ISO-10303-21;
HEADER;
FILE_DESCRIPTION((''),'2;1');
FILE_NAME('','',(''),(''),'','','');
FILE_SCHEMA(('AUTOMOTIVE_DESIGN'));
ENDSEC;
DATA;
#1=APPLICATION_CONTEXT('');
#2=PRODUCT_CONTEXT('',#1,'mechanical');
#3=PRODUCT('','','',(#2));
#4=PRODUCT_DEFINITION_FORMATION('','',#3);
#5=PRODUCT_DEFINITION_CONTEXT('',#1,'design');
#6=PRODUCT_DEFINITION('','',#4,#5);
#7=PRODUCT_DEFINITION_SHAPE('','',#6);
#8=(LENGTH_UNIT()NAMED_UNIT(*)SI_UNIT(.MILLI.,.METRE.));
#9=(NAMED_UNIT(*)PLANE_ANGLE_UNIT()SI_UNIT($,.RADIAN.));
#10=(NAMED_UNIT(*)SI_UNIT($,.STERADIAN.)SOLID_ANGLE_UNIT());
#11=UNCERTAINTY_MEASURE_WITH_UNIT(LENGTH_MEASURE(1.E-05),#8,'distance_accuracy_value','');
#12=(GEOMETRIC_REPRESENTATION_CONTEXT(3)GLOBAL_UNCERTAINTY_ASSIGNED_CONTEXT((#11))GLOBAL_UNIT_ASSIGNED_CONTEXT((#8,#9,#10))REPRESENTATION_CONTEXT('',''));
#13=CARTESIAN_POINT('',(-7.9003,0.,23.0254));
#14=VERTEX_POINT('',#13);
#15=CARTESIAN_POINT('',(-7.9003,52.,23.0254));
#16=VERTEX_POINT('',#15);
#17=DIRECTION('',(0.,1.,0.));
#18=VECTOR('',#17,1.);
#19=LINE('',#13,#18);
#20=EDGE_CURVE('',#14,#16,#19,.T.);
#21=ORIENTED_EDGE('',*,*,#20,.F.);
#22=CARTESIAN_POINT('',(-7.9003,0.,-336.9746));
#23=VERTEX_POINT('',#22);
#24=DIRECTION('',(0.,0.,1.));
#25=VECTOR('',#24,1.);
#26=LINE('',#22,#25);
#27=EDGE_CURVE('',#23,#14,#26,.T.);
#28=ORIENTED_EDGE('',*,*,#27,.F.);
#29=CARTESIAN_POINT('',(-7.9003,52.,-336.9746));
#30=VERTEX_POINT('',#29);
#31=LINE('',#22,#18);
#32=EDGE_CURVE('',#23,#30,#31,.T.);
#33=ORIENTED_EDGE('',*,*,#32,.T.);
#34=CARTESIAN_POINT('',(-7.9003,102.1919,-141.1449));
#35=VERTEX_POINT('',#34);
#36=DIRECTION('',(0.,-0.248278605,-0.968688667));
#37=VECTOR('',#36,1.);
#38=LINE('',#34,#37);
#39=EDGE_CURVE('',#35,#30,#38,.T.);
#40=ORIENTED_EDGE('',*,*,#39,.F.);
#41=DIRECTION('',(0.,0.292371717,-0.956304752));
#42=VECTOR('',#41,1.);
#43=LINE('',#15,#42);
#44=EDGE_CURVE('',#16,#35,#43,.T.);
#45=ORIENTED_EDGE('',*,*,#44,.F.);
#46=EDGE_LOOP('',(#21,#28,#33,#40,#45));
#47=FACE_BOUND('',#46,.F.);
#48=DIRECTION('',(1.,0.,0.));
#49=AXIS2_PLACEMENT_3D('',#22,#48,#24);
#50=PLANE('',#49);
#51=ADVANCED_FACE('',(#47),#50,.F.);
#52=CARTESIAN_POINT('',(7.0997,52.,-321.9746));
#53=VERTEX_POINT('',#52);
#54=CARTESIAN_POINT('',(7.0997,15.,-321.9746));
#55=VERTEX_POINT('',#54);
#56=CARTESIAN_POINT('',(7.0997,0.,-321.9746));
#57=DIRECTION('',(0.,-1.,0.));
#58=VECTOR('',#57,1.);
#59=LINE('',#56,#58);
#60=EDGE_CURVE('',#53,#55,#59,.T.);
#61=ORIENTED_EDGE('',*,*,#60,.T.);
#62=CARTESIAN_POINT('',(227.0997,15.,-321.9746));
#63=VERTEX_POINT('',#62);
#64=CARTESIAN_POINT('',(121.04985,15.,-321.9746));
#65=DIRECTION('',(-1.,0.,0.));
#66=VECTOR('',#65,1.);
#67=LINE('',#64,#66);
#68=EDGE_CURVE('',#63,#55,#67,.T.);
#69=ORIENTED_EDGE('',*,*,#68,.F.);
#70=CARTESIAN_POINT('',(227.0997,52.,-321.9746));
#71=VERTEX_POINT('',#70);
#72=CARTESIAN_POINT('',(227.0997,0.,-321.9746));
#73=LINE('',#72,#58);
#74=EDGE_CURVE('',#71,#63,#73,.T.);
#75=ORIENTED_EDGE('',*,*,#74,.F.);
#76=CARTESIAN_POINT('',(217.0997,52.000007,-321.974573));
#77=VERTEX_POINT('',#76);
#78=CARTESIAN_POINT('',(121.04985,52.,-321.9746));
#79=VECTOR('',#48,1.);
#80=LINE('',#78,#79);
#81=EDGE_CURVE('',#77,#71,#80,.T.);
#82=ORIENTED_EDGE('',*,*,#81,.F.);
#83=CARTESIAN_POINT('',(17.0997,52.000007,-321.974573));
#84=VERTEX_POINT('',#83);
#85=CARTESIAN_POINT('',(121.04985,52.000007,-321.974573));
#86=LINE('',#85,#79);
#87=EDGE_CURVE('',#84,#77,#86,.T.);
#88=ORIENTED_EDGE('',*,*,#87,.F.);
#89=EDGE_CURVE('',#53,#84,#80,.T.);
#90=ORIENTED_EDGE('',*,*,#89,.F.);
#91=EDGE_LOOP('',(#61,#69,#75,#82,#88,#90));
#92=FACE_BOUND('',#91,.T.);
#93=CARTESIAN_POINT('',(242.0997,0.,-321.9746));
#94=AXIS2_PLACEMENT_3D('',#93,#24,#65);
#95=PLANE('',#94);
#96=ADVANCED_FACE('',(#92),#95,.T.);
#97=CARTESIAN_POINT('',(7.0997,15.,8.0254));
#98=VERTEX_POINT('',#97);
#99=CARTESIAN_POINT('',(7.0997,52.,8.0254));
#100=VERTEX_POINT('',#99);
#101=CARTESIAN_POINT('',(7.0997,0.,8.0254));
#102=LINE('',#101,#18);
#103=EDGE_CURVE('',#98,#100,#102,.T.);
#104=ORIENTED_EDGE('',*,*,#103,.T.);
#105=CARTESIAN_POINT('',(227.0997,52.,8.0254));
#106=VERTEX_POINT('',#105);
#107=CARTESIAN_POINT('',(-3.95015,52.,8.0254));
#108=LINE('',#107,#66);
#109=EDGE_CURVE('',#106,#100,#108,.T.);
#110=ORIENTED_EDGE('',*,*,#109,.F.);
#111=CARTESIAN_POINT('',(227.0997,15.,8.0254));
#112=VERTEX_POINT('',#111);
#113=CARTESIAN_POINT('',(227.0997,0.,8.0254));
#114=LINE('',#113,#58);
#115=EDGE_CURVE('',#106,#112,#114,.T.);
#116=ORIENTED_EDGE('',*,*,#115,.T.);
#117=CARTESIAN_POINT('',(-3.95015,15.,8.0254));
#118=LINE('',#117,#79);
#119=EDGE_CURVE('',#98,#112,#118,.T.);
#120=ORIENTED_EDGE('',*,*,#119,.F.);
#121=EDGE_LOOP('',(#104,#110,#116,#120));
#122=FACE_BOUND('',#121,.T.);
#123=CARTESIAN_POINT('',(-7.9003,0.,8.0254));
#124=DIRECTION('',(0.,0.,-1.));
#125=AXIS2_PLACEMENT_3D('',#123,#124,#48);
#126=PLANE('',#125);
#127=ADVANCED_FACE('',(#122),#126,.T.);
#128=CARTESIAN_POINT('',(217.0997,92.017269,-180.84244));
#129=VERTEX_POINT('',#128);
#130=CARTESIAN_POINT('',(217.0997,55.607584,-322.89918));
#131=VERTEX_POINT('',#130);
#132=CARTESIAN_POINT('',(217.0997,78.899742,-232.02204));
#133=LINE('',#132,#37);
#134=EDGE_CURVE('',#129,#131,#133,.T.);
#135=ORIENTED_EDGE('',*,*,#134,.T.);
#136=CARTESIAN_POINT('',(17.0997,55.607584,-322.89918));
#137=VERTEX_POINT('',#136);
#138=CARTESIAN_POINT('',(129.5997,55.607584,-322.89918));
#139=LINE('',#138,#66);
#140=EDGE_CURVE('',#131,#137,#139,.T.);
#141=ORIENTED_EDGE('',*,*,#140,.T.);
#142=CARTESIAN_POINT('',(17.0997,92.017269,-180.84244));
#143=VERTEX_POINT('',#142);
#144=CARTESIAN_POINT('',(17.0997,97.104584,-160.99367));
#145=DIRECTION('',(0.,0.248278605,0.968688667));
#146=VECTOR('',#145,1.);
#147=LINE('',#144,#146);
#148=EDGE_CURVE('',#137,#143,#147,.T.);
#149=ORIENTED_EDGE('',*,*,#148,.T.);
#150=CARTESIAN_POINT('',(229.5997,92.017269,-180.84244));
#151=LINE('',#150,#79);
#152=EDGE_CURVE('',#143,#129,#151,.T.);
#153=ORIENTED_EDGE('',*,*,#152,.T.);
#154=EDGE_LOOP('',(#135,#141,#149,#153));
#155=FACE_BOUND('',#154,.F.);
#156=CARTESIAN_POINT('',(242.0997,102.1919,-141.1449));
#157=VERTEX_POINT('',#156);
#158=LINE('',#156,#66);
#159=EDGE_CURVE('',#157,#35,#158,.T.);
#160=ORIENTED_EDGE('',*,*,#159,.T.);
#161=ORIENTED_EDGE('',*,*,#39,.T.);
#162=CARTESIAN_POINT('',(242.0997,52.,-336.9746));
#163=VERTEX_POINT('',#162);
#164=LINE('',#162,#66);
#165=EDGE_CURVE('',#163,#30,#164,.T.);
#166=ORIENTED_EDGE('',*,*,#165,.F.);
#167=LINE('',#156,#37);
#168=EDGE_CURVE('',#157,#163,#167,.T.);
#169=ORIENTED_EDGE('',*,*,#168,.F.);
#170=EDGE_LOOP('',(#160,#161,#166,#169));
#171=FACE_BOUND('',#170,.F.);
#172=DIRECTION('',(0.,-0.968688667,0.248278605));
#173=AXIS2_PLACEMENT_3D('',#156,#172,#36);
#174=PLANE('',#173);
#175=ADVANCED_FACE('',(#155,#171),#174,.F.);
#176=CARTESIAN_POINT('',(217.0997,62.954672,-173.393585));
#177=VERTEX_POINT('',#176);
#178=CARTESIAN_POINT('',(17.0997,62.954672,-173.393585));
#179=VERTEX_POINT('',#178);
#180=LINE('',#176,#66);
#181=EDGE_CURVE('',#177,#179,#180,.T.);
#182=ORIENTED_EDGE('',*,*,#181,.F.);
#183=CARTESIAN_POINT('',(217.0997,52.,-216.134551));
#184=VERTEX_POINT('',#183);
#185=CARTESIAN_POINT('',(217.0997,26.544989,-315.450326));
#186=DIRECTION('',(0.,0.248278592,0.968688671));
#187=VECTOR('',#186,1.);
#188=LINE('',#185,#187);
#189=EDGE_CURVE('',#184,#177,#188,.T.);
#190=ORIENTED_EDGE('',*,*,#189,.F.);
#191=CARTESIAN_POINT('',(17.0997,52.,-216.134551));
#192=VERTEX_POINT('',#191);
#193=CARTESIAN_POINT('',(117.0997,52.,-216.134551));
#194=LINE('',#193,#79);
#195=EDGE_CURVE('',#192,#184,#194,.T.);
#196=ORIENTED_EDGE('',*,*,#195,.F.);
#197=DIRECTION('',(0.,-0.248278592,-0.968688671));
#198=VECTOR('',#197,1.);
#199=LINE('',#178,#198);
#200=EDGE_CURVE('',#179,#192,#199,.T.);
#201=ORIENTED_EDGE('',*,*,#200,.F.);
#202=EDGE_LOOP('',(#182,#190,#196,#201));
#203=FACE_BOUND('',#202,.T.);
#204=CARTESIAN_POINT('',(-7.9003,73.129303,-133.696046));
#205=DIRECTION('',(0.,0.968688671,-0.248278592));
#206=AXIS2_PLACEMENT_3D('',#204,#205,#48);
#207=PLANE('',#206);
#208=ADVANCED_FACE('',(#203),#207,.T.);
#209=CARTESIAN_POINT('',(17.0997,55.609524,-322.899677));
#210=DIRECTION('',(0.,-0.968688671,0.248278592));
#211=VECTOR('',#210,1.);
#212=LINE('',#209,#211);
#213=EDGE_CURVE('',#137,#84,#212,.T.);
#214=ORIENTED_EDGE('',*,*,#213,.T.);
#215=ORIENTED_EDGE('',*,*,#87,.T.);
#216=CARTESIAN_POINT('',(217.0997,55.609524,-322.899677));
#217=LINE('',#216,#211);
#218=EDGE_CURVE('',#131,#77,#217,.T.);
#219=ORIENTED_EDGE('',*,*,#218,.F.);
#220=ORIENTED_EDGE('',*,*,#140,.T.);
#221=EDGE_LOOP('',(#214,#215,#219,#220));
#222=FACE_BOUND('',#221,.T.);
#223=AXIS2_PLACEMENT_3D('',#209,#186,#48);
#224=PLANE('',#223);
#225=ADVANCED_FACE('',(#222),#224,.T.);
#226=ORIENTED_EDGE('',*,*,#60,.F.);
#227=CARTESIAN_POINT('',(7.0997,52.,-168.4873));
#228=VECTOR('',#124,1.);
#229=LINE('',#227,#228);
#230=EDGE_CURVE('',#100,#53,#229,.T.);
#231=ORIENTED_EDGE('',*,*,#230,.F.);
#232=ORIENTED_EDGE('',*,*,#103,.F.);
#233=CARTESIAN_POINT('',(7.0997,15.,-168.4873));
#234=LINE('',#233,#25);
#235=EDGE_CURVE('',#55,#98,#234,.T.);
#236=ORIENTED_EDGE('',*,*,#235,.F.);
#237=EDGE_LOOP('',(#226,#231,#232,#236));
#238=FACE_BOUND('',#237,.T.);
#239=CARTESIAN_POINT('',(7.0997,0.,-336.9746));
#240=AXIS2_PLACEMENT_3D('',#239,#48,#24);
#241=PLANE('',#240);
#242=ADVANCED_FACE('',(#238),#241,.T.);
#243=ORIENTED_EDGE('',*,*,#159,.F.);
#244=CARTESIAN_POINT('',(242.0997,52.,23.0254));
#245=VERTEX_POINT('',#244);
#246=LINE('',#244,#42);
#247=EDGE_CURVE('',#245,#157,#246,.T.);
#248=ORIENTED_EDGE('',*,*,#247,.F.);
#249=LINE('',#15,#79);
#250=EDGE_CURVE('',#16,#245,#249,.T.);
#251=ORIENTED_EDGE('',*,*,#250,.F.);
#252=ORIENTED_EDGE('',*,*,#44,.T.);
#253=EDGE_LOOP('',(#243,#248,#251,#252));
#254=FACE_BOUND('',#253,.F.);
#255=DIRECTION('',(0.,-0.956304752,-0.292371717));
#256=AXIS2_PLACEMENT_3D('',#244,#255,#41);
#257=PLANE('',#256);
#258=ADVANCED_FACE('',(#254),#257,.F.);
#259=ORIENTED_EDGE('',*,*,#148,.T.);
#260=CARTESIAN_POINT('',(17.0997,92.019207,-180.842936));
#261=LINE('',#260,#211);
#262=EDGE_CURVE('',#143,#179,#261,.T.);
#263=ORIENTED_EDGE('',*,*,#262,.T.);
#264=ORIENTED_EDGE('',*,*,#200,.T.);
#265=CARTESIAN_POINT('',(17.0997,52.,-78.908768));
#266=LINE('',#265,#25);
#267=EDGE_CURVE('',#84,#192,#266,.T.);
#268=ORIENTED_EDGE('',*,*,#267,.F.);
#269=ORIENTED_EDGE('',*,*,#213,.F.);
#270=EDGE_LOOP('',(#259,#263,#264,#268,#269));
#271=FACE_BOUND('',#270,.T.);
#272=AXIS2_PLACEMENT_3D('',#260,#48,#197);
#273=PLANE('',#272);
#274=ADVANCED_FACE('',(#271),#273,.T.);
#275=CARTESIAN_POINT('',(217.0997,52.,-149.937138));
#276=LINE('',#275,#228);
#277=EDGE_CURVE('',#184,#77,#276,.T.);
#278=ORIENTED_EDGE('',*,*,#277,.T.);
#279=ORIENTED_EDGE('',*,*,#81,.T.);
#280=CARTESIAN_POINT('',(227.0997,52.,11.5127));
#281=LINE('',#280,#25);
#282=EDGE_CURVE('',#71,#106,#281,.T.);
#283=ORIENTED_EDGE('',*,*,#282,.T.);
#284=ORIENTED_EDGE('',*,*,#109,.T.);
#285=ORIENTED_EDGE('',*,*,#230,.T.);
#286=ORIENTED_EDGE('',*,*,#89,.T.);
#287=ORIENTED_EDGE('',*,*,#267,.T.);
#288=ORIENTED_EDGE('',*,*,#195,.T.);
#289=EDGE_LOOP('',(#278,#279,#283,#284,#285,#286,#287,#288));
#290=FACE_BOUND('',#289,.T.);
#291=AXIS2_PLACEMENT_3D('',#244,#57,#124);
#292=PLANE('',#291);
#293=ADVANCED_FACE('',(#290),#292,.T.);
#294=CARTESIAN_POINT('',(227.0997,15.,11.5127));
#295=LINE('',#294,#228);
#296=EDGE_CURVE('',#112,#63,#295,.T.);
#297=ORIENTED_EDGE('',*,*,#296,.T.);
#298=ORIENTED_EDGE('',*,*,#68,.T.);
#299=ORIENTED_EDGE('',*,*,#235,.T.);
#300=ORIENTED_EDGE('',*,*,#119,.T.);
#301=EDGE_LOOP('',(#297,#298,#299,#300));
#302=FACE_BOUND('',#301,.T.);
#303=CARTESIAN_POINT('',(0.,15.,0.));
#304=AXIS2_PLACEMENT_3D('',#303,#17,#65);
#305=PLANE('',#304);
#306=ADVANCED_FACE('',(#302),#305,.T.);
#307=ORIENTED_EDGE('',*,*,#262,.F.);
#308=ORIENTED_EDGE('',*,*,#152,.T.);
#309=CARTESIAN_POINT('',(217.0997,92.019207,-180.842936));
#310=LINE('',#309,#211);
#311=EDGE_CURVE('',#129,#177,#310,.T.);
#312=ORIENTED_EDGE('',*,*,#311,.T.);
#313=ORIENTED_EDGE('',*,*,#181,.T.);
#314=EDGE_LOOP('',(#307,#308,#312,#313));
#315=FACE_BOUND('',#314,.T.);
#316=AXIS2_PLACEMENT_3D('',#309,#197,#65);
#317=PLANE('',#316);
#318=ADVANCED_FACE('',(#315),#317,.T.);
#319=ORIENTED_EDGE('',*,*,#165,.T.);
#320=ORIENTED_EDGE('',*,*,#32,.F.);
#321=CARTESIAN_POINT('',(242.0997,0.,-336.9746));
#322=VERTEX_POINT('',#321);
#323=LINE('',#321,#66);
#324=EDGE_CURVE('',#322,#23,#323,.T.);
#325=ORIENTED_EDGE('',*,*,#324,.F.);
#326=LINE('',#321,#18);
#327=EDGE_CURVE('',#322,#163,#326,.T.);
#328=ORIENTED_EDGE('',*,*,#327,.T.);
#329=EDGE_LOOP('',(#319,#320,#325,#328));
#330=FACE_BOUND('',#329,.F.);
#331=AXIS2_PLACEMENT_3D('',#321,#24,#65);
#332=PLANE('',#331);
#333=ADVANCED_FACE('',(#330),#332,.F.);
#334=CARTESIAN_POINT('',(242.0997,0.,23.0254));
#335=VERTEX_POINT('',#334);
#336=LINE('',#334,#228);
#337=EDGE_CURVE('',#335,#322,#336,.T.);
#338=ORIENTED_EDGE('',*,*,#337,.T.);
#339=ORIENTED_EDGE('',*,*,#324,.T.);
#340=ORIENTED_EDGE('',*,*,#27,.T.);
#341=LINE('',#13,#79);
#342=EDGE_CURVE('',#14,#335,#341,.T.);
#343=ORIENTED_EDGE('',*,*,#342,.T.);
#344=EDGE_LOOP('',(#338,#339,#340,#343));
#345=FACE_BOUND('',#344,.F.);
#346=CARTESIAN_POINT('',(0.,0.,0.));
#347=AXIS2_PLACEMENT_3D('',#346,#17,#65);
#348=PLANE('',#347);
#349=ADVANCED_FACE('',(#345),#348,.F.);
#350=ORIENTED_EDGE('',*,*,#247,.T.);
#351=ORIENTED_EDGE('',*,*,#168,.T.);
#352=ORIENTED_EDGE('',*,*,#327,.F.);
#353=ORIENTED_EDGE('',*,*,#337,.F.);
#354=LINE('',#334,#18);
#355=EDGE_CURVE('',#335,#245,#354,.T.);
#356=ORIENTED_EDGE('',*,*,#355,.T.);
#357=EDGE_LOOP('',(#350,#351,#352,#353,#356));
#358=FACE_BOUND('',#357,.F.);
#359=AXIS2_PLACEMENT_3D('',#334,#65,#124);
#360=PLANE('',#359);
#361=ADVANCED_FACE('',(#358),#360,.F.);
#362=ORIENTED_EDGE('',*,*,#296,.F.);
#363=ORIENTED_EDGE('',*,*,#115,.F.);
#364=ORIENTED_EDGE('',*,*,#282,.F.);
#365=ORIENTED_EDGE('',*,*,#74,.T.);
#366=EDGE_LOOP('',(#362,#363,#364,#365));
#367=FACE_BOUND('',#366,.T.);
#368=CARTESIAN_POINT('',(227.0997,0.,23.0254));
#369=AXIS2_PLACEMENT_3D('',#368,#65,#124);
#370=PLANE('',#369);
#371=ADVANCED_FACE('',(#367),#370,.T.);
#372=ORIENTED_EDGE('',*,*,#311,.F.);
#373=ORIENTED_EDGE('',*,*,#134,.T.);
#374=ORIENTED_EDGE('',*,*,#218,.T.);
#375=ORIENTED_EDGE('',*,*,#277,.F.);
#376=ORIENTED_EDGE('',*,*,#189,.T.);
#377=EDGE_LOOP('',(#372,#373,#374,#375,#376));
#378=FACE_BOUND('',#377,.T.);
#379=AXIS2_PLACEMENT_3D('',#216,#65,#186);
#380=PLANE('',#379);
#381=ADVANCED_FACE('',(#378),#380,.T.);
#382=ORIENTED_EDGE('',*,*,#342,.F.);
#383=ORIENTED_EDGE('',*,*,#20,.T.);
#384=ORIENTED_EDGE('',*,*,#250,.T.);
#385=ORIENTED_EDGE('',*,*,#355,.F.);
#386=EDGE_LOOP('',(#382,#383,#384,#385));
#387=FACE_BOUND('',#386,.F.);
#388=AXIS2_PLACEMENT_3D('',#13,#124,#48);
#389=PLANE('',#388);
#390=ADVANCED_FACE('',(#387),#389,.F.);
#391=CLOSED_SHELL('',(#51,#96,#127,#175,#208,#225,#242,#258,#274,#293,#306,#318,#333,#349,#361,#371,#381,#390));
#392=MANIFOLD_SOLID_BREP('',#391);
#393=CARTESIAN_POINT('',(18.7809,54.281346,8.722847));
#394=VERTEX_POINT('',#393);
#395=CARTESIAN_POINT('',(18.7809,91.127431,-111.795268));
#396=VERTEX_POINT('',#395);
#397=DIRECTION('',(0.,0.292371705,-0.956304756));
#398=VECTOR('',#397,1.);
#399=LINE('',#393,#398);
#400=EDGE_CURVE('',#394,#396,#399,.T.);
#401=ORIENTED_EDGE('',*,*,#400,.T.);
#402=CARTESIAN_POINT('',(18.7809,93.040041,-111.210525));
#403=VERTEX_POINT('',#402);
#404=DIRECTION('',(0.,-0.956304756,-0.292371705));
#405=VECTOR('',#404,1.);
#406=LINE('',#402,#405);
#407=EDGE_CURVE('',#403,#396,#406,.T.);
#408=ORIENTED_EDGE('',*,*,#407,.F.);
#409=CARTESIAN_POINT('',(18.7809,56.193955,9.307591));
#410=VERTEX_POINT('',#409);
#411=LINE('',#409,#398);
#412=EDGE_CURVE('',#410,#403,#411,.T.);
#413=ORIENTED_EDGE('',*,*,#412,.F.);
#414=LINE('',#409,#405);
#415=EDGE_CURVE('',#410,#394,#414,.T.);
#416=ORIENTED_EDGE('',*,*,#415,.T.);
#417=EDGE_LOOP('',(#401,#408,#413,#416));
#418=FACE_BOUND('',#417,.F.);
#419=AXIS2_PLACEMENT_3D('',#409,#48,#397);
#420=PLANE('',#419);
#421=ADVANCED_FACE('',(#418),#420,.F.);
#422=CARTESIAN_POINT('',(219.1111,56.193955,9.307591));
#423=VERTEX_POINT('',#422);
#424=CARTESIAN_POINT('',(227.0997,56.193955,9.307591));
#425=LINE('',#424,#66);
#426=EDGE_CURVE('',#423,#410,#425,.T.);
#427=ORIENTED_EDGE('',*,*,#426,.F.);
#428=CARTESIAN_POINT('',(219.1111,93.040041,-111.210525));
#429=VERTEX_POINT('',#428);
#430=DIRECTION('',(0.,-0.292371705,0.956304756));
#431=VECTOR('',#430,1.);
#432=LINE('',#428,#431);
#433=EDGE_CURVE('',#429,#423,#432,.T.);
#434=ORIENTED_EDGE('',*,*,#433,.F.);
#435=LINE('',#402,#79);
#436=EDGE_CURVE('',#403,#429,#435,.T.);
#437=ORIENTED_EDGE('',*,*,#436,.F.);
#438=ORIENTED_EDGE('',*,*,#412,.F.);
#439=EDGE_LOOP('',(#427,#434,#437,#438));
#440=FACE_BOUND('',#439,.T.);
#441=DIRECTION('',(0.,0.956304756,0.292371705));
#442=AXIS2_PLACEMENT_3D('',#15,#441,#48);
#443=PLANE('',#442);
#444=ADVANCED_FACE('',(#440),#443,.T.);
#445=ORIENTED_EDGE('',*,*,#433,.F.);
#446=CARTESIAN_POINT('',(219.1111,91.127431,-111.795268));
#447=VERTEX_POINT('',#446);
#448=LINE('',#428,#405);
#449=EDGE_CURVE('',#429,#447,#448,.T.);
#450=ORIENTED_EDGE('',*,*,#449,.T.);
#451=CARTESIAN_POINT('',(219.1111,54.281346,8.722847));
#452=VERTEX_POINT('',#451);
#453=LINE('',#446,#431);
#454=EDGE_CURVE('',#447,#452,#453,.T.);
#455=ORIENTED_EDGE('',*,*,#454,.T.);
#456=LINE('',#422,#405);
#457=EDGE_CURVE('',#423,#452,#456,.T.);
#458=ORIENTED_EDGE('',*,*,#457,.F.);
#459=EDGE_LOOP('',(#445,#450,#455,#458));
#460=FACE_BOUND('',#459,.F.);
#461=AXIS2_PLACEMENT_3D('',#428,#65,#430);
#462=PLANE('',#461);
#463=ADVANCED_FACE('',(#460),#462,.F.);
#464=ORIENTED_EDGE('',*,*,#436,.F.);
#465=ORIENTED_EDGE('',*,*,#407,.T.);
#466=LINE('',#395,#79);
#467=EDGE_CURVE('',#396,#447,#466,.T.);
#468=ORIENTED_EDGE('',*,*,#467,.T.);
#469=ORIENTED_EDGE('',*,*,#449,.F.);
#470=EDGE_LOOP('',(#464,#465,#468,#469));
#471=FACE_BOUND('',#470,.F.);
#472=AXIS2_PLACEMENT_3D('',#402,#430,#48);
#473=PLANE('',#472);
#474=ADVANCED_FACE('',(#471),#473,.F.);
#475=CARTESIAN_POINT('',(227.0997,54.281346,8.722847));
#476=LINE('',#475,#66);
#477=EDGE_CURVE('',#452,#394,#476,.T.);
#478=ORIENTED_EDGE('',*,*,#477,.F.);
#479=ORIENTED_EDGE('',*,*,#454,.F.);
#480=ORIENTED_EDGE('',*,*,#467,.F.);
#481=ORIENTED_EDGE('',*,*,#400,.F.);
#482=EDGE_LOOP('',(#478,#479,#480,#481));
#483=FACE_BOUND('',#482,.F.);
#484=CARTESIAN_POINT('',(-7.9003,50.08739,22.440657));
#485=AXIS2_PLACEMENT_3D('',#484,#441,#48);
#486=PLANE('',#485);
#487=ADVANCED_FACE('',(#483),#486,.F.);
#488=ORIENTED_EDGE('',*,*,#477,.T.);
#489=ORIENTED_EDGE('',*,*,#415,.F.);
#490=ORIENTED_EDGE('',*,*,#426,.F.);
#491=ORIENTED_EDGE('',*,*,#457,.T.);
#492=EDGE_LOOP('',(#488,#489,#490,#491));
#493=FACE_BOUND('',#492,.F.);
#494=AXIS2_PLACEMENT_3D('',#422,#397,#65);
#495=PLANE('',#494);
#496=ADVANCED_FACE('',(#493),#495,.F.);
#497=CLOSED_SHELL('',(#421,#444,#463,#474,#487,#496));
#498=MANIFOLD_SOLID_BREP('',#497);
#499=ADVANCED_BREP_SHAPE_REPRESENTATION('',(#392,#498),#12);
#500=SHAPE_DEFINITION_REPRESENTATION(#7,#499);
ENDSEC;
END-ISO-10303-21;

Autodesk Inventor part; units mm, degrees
ref_plane "YZ Plane" through (0, 0, 0) normal (1, 0, 0) x (0, 1, 0)
ref_plane "XZ Plane" through (0, 0, 0) normal (0, 1, 0) x (-1, 0, 0)
ref_plane "XY Plane" through (0, 0, 0) normal (0, 0, 1) x (1, 0, 0)
sketch "Sketch1" plane through (0, 0, 0) normal (0, 1, 0) x (-1, 0, 0)
  line L0 (7.9003, 23.0254) -> (-242.0997, 23.0254)
  line L1 (-242.0997, 23.0254) -> (-242.0997, -336.9746)
  line L2 (-242.0997, -336.9746) -> (7.9003, -336.9746)
  line L3 (7.9003, -336.9746) -> (7.9003, 23.0254)
  point P0 (0, 0)
  dimension "d0" = 250
  dimension "d1" = 360
extrude "Extrusion1" add sketch "Sketch1" along normal blind 52
shell "Shell1" thickness 15 removed faces 1 at (158.7664, 52, -96.9746)
sketch3d "3D Sketch5"
sketch "Sketch8" plane through (242.0997, 0, 23.0254) normal (1, 0, 0) x (0, 0, -1)
  line L0 (0, 52) -> (164.1703, 102.1919)
  line L1 (0, 52) -> (171.6715, 52) construction
  line L2 (0, 52) -> (360, 52) projected
  line L3 (164.1703, 102.1919) -> (360, 52)
  line L4 (360, 52) -> (0, 52)
  point P0 (23.0254, 0)
  dimension "d27" = 17
extrude "Extrusion4" add sketch "Sketch8" against normal up to surface (250 mm away)
sketch "Sketch9" plane through (-7.9003, 102.1919, -141.1449) normal (0, 0.9686887, -0.2482786) x (1, 0, 0)
  line L0 (15, 187.6292) -> (235, 187.6292) projected
  line L1 (225, 40.9807) -> (25, 40.9807)
  line L2 (25, 40.9807) -> (25, 187.6292)
  line L3 (25, 187.6292) -> (225, 187.6292)
  line L4 (225, 187.6292) -> (225, 40.9807)
  line L5 (250, 202.1596) -> (250, 0) projected
  line L6 (0, 202.1596) -> (0, 0) projected
  point P0 (7.9003, -111.3534)
  point P1 (225, 187.6292)
  dimension "d30" = 25
  dimension "d31" = 25
extrude "Extrusion5" cut sketch "Sketch9" against normal blind 30
sketch "Sketch10" plane through (242.0997, 0, -336.9746) normal (0, 0, -1) x (-1, 0, 0)
  line L0 (225, 52) -> (25, 52) projected
  line L1 (0, 0) -> (250, 0) projected
  line L2 (25, 52) -> (226.6576, 52)
  line L3 (226.6576, 52) -> (226.6576, 0)
  line L4 (226.6576, 0) -> (25, 0)
  line L5 (25, 0) -> (25, 52)
  point P0 (242.0997, 0)
sketch "Sketch11" plane through (-7.9003, 0, 23.0254) normal (0, 0, 1) x (1, 0, 0)
  line L0 (15, 15) -> (15, 52) projected
  line L1 (15, 28.3801) -> (237.0279, 28.3801)
  line L2 (237.0279, 28.3801) -> (237.0279, 6.6777)
  line L3 (237.0279, 6.6777) -> (15, 6.6777)
  line L4 (15, 6.6777) -> (15, 28.3801)
  point P0 (7.9003, 0)
sketch "Sketch12" plane through (-7.9003, 52, 23.0254) normal (0, 0.9563048, 0.2923717) x (1, 0, 0)
  line L0 (235, 14.3446) -> (15, 14.3446) projected
  line L1 (26.6812, 140.3694) -> (227.0114, 140.3694)
  line L2 (227.0114, 140.3694) -> (227.0114, 14.3446)
  line L3 (227.0114, 14.3446) -> (26.6812, 14.3446)
  line L4 (26.6812, 14.3446) -> (26.6812, 140.3694)
  point P0 (7.9003, 6.8159)
extrude "Extrusion6" add sketch "Sketch12" against normal blind 2 separate body
properties part number "Part1proj" material "Wood (Birch)"
